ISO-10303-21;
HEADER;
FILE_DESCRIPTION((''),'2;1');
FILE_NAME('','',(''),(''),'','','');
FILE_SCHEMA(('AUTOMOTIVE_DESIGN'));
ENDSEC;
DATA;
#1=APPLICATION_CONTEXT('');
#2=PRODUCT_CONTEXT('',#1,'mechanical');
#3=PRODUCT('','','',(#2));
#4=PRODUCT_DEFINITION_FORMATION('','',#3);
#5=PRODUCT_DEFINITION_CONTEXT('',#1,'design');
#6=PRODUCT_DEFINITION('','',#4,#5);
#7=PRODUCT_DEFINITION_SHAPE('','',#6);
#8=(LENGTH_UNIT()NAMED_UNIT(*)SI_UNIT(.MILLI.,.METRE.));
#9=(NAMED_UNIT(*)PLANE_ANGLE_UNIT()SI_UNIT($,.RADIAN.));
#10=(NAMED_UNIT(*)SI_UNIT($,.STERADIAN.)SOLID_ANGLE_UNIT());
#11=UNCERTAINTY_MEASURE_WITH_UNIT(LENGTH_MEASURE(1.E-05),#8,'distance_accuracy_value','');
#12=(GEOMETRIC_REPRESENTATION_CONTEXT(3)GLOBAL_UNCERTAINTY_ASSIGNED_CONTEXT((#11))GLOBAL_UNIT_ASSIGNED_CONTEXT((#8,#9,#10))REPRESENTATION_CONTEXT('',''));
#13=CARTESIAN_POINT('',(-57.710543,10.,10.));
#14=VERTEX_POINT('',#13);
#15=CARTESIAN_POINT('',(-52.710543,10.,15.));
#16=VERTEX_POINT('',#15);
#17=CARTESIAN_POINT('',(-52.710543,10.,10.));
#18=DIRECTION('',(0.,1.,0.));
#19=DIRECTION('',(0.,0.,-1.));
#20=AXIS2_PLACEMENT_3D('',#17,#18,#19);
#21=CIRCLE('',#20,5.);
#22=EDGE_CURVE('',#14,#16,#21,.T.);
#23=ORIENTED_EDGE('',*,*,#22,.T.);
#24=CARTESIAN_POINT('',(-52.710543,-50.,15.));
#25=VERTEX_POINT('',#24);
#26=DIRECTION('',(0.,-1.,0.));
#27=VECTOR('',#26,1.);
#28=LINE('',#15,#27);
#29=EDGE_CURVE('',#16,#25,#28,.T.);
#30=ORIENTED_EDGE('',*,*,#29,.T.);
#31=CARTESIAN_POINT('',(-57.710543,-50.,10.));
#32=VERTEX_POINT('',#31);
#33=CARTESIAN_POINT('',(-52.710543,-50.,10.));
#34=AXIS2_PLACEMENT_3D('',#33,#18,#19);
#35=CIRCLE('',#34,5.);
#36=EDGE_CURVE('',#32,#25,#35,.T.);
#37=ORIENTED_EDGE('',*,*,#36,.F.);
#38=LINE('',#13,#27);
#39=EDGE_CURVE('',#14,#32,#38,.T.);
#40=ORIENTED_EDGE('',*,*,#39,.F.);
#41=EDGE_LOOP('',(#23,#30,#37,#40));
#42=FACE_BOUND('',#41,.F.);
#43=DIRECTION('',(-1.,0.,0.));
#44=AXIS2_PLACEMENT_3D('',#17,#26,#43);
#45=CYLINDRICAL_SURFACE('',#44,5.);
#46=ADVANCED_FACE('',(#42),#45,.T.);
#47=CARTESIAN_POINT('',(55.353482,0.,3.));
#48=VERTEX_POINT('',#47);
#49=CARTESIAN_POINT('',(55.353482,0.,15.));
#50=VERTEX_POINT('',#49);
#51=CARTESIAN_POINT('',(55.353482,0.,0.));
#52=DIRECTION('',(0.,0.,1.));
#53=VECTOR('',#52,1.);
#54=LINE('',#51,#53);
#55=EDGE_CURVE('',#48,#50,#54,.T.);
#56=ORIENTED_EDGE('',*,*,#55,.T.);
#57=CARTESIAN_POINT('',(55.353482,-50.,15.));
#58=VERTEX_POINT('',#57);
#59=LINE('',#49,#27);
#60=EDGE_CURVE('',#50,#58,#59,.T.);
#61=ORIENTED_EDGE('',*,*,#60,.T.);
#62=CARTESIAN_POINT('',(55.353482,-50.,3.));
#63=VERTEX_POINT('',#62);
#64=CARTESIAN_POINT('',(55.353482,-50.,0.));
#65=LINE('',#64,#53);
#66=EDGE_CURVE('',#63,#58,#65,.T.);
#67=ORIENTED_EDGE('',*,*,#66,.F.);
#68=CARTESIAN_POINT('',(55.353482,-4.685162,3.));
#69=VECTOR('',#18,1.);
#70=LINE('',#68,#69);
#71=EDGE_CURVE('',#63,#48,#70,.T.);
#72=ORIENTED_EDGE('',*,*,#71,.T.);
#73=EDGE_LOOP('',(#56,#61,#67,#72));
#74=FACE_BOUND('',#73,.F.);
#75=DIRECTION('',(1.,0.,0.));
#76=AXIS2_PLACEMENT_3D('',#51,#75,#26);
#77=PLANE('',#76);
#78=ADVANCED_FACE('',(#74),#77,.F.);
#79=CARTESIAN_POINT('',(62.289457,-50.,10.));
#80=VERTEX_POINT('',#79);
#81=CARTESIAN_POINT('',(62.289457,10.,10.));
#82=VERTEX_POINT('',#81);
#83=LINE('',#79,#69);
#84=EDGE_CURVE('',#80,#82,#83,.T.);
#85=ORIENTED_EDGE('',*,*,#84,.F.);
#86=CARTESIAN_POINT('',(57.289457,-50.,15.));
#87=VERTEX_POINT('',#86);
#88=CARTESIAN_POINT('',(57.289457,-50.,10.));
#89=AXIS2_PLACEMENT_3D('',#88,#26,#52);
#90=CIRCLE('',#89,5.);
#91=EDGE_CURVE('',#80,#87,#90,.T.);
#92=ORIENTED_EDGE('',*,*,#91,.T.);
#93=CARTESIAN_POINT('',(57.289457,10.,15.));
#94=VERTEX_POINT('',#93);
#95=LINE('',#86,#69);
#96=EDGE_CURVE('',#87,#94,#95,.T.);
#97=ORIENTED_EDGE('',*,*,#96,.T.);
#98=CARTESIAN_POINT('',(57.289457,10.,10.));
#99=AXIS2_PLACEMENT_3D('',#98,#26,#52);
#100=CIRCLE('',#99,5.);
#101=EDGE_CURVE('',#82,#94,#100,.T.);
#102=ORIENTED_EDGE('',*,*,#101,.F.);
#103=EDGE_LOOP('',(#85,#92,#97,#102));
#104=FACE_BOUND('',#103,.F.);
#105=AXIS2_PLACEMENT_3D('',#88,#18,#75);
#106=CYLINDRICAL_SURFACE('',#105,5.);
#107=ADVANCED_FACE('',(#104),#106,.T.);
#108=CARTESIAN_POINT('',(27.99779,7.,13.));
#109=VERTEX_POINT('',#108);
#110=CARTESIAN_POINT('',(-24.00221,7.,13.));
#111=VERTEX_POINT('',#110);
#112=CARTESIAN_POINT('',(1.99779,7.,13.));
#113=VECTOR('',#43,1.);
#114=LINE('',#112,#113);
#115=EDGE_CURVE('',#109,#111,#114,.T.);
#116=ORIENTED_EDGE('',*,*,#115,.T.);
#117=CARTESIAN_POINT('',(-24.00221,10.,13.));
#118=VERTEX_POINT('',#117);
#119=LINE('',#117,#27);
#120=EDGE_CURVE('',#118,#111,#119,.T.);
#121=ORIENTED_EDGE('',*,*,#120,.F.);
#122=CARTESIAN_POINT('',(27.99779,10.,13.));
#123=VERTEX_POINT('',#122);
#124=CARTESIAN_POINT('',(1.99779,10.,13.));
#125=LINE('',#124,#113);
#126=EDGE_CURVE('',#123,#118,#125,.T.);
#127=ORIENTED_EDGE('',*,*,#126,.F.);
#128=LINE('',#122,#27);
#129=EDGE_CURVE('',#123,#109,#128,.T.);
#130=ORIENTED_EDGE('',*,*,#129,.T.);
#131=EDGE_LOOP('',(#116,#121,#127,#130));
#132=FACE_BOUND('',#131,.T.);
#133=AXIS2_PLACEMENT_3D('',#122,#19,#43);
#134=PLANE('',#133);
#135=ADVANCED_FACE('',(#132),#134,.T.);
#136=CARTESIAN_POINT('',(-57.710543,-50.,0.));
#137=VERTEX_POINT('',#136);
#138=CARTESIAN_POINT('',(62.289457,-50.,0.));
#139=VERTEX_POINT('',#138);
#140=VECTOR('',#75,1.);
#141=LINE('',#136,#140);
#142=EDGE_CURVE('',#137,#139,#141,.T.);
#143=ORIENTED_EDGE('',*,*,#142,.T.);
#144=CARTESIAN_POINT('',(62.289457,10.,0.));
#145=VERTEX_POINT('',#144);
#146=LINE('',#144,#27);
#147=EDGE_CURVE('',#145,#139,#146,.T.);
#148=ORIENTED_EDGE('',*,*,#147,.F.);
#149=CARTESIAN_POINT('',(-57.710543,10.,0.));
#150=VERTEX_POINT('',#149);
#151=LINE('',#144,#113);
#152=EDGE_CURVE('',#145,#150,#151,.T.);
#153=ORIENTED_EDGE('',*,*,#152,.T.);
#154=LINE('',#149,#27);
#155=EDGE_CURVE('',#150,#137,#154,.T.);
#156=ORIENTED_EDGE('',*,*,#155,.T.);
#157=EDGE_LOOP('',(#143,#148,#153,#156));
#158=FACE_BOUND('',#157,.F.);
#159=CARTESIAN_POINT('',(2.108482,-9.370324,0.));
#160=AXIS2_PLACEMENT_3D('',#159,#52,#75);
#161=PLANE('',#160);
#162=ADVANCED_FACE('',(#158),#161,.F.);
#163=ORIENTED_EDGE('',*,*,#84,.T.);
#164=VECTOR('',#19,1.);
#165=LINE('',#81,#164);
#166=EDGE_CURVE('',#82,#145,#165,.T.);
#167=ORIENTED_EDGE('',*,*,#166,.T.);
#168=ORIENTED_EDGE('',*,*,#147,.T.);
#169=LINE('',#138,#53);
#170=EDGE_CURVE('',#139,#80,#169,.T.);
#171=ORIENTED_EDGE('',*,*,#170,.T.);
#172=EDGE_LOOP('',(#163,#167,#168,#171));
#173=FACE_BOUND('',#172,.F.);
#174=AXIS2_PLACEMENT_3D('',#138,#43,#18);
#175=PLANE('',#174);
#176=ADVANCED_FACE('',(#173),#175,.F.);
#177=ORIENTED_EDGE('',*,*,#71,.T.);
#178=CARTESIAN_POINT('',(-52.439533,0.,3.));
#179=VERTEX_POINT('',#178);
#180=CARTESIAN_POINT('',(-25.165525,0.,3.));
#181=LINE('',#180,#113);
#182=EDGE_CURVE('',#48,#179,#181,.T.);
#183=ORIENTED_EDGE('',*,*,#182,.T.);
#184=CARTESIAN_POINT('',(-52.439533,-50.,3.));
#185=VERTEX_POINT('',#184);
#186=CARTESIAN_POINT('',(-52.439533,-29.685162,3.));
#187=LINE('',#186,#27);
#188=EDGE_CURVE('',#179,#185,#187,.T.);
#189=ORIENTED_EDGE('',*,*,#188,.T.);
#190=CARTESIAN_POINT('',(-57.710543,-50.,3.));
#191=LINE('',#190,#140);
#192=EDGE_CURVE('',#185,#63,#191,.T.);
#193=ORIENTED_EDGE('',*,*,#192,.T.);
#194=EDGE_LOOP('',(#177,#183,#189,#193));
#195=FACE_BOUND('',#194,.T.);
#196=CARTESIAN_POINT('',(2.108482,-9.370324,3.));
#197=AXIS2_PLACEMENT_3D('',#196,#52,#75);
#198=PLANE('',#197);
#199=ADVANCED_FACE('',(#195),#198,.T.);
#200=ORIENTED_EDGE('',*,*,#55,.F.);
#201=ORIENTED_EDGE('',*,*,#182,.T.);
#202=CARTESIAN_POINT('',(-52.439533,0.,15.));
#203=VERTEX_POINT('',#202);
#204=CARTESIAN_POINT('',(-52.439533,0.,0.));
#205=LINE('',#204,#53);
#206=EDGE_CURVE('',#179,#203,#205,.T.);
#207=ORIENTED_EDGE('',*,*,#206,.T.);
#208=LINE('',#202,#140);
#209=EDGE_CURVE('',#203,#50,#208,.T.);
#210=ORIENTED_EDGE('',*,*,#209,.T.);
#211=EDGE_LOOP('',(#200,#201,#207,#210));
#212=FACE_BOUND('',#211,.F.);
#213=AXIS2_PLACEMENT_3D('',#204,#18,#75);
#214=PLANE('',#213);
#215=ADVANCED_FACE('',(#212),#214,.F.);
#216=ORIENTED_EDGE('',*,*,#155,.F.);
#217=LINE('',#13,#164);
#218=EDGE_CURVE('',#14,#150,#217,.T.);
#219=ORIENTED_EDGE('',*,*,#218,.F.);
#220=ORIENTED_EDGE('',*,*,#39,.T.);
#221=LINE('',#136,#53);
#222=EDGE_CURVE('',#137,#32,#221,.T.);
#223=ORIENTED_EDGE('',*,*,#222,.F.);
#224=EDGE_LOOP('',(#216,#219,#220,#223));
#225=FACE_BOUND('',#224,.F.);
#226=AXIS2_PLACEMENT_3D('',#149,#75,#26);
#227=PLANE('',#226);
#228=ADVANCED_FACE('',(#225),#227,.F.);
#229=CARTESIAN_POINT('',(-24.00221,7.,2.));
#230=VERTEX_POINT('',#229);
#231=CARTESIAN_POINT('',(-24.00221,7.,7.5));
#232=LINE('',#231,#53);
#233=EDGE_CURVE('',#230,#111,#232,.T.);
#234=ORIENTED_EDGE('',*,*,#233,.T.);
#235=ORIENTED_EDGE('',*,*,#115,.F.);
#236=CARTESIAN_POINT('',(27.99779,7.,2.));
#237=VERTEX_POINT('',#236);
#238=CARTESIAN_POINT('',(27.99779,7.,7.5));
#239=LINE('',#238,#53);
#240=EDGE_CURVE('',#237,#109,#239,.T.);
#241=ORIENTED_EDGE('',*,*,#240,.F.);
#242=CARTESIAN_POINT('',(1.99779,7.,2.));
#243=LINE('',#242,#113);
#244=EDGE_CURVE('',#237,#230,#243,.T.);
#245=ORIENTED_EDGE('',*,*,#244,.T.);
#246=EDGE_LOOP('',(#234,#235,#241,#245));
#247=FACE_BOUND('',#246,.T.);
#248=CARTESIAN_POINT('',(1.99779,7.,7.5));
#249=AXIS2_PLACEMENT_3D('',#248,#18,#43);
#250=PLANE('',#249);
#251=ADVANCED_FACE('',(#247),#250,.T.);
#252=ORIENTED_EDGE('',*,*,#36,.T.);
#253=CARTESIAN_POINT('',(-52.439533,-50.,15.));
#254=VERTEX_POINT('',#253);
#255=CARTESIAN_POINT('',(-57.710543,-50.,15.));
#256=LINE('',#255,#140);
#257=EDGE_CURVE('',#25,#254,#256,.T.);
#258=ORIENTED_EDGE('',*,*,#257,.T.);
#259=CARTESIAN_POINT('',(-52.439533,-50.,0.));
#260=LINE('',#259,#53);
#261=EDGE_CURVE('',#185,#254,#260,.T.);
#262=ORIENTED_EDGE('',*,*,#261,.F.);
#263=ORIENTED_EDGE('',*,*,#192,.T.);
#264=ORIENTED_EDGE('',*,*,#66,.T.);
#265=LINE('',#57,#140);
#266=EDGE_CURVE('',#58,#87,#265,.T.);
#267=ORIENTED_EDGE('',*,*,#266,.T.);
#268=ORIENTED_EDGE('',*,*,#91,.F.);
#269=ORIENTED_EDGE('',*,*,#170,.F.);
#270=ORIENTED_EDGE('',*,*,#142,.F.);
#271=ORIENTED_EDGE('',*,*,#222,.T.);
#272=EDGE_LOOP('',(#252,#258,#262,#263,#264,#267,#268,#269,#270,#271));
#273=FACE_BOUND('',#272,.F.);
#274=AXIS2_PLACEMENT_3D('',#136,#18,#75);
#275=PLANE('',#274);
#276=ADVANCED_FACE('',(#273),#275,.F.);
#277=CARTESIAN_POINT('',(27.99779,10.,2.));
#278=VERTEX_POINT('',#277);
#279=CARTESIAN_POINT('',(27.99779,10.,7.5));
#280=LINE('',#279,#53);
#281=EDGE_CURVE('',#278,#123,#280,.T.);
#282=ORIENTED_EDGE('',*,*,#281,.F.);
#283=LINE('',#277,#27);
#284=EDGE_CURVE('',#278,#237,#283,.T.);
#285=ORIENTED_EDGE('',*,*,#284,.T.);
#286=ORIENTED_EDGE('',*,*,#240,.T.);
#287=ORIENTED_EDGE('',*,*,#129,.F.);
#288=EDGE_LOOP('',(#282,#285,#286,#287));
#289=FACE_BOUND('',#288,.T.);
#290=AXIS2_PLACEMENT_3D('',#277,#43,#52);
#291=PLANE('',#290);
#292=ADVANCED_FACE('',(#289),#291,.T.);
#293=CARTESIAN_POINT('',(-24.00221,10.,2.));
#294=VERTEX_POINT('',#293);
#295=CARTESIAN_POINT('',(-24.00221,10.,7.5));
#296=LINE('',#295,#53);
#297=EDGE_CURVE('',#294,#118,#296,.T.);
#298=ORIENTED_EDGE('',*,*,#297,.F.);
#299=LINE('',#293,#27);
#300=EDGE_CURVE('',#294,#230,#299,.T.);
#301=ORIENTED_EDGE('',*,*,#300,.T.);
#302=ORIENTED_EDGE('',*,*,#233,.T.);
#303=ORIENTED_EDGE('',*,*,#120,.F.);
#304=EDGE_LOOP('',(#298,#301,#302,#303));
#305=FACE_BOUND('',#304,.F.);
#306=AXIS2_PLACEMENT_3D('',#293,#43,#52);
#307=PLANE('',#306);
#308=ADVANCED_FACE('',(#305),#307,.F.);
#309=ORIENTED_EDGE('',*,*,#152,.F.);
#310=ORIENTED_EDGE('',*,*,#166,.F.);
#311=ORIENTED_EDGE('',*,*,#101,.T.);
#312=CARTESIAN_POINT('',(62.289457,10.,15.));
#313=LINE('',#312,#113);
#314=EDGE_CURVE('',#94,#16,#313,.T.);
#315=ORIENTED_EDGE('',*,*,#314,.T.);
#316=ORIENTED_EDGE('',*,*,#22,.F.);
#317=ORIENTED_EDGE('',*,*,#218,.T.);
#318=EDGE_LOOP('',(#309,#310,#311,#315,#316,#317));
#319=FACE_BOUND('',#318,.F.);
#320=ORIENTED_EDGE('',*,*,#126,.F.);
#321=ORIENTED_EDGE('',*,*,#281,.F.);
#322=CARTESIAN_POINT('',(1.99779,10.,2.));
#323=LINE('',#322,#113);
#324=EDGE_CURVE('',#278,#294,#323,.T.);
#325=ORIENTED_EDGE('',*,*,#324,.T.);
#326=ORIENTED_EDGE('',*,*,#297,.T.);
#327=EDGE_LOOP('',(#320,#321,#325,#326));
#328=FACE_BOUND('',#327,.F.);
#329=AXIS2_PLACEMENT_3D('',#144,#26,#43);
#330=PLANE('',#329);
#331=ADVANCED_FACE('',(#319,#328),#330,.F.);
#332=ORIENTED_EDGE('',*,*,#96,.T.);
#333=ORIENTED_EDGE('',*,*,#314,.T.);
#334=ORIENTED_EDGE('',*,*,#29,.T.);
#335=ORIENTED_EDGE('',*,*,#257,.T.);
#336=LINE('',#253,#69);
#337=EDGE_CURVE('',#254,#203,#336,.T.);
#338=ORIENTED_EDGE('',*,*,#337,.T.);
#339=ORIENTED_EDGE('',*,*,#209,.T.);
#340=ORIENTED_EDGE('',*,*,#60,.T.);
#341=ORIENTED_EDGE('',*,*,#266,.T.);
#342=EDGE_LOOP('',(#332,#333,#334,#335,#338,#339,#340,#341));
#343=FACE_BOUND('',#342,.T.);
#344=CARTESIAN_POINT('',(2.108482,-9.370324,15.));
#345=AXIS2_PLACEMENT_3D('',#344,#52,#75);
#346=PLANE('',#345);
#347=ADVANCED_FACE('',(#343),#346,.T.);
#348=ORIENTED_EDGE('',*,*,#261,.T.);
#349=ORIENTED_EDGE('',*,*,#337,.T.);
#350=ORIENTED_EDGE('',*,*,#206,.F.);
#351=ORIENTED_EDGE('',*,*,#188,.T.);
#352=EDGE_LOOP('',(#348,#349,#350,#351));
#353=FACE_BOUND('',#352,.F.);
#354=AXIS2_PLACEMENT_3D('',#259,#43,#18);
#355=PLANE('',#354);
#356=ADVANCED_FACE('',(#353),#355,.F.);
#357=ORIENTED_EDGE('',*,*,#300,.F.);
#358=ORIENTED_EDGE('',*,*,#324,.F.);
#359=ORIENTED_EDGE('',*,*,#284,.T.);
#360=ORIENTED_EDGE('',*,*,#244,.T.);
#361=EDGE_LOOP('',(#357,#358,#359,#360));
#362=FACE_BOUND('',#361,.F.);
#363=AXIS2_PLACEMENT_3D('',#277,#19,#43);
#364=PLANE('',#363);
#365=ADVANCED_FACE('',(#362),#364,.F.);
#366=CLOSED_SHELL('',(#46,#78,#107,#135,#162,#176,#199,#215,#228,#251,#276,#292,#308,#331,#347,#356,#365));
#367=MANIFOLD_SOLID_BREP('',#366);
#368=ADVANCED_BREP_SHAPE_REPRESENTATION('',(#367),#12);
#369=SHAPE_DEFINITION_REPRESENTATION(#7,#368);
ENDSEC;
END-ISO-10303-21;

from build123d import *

# Parameters (mm, degrees)
F0_W     = 107.7930156246
F0_H     = 50
F1_DEPTH = 3
F2_DEPTH = 15
F3_R     = 5
F3_2_R   = 5
F5_W     = 52
F5_H     = 11
F6_DEPTH = 3


with BuildPart() as f1:
    # F0 (on Top) → F1 (new body)
    with BuildSketch(Plane.XY):
        Polygon((-57.7105433475, 0), (-57.7105433475, -50), (-52.4395332623, -50), (-52.4395332623, 0), (55.3534823623, 0), (55.3534823623, -50), (62.2894566525, -50), (62.2894566525, 0), (62.2894566525, 10), (-57.7105433475, 10), align=None)
        with Locations((1.45697455, -25)):
            Rectangle(F0_W, F0_H)
    extrude(amount=F1_DEPTH)

    # F3#2
    f3_2_edges = [f1.edges().sort_by_distance(p)[0] for p in [
        (-57.710543, -50, 1.5),
        (62.289457, -50, 1.5),
    ]]
    fillet(f3_2_edges, radius=F3_2_R)


with BuildPart() as f2:
    # F0 (on Top) → F2 (new body)
    with BuildSketch(Plane.XY):
        Polygon((-57.7105433475, 0), (-57.7105433475, -50), (-52.4395332623, -50), (-52.4395332623, 0), (55.3534823623, 0), (55.3534823623, -50), (62.2894566525, -50), (62.2894566525, 0), (62.2894566525, 10), (-57.7105433475, 10), align=None)
    extrude(amount=F2_DEPTH)

    # F3
    f3_edges = [f2.edges().sort_by_distance(p)[0] for p in [
        (-57.710543, -20, 15),
        (62.289457, -20, 15),
    ]]
    fillet(f3_edges, radius=F3_R)


with BuildPart() as f1_1:
    add(f1.part)

    # F4: union F2
    add(f2.part)

    # F5 (on face) → F6 (cut)
    with BuildSketch(Plane(origin=(0, 10, 0), x_dir=(-1, 0, 0), z_dir=(0, 1, 0))):
        with Locations((-1.9977902994, 7.5)):
            Rectangle(F5_W, F5_H)
    extrude(amount=-F6_DEPTH, mode=Mode.SUBTRACT)


solid = f1_1.part
